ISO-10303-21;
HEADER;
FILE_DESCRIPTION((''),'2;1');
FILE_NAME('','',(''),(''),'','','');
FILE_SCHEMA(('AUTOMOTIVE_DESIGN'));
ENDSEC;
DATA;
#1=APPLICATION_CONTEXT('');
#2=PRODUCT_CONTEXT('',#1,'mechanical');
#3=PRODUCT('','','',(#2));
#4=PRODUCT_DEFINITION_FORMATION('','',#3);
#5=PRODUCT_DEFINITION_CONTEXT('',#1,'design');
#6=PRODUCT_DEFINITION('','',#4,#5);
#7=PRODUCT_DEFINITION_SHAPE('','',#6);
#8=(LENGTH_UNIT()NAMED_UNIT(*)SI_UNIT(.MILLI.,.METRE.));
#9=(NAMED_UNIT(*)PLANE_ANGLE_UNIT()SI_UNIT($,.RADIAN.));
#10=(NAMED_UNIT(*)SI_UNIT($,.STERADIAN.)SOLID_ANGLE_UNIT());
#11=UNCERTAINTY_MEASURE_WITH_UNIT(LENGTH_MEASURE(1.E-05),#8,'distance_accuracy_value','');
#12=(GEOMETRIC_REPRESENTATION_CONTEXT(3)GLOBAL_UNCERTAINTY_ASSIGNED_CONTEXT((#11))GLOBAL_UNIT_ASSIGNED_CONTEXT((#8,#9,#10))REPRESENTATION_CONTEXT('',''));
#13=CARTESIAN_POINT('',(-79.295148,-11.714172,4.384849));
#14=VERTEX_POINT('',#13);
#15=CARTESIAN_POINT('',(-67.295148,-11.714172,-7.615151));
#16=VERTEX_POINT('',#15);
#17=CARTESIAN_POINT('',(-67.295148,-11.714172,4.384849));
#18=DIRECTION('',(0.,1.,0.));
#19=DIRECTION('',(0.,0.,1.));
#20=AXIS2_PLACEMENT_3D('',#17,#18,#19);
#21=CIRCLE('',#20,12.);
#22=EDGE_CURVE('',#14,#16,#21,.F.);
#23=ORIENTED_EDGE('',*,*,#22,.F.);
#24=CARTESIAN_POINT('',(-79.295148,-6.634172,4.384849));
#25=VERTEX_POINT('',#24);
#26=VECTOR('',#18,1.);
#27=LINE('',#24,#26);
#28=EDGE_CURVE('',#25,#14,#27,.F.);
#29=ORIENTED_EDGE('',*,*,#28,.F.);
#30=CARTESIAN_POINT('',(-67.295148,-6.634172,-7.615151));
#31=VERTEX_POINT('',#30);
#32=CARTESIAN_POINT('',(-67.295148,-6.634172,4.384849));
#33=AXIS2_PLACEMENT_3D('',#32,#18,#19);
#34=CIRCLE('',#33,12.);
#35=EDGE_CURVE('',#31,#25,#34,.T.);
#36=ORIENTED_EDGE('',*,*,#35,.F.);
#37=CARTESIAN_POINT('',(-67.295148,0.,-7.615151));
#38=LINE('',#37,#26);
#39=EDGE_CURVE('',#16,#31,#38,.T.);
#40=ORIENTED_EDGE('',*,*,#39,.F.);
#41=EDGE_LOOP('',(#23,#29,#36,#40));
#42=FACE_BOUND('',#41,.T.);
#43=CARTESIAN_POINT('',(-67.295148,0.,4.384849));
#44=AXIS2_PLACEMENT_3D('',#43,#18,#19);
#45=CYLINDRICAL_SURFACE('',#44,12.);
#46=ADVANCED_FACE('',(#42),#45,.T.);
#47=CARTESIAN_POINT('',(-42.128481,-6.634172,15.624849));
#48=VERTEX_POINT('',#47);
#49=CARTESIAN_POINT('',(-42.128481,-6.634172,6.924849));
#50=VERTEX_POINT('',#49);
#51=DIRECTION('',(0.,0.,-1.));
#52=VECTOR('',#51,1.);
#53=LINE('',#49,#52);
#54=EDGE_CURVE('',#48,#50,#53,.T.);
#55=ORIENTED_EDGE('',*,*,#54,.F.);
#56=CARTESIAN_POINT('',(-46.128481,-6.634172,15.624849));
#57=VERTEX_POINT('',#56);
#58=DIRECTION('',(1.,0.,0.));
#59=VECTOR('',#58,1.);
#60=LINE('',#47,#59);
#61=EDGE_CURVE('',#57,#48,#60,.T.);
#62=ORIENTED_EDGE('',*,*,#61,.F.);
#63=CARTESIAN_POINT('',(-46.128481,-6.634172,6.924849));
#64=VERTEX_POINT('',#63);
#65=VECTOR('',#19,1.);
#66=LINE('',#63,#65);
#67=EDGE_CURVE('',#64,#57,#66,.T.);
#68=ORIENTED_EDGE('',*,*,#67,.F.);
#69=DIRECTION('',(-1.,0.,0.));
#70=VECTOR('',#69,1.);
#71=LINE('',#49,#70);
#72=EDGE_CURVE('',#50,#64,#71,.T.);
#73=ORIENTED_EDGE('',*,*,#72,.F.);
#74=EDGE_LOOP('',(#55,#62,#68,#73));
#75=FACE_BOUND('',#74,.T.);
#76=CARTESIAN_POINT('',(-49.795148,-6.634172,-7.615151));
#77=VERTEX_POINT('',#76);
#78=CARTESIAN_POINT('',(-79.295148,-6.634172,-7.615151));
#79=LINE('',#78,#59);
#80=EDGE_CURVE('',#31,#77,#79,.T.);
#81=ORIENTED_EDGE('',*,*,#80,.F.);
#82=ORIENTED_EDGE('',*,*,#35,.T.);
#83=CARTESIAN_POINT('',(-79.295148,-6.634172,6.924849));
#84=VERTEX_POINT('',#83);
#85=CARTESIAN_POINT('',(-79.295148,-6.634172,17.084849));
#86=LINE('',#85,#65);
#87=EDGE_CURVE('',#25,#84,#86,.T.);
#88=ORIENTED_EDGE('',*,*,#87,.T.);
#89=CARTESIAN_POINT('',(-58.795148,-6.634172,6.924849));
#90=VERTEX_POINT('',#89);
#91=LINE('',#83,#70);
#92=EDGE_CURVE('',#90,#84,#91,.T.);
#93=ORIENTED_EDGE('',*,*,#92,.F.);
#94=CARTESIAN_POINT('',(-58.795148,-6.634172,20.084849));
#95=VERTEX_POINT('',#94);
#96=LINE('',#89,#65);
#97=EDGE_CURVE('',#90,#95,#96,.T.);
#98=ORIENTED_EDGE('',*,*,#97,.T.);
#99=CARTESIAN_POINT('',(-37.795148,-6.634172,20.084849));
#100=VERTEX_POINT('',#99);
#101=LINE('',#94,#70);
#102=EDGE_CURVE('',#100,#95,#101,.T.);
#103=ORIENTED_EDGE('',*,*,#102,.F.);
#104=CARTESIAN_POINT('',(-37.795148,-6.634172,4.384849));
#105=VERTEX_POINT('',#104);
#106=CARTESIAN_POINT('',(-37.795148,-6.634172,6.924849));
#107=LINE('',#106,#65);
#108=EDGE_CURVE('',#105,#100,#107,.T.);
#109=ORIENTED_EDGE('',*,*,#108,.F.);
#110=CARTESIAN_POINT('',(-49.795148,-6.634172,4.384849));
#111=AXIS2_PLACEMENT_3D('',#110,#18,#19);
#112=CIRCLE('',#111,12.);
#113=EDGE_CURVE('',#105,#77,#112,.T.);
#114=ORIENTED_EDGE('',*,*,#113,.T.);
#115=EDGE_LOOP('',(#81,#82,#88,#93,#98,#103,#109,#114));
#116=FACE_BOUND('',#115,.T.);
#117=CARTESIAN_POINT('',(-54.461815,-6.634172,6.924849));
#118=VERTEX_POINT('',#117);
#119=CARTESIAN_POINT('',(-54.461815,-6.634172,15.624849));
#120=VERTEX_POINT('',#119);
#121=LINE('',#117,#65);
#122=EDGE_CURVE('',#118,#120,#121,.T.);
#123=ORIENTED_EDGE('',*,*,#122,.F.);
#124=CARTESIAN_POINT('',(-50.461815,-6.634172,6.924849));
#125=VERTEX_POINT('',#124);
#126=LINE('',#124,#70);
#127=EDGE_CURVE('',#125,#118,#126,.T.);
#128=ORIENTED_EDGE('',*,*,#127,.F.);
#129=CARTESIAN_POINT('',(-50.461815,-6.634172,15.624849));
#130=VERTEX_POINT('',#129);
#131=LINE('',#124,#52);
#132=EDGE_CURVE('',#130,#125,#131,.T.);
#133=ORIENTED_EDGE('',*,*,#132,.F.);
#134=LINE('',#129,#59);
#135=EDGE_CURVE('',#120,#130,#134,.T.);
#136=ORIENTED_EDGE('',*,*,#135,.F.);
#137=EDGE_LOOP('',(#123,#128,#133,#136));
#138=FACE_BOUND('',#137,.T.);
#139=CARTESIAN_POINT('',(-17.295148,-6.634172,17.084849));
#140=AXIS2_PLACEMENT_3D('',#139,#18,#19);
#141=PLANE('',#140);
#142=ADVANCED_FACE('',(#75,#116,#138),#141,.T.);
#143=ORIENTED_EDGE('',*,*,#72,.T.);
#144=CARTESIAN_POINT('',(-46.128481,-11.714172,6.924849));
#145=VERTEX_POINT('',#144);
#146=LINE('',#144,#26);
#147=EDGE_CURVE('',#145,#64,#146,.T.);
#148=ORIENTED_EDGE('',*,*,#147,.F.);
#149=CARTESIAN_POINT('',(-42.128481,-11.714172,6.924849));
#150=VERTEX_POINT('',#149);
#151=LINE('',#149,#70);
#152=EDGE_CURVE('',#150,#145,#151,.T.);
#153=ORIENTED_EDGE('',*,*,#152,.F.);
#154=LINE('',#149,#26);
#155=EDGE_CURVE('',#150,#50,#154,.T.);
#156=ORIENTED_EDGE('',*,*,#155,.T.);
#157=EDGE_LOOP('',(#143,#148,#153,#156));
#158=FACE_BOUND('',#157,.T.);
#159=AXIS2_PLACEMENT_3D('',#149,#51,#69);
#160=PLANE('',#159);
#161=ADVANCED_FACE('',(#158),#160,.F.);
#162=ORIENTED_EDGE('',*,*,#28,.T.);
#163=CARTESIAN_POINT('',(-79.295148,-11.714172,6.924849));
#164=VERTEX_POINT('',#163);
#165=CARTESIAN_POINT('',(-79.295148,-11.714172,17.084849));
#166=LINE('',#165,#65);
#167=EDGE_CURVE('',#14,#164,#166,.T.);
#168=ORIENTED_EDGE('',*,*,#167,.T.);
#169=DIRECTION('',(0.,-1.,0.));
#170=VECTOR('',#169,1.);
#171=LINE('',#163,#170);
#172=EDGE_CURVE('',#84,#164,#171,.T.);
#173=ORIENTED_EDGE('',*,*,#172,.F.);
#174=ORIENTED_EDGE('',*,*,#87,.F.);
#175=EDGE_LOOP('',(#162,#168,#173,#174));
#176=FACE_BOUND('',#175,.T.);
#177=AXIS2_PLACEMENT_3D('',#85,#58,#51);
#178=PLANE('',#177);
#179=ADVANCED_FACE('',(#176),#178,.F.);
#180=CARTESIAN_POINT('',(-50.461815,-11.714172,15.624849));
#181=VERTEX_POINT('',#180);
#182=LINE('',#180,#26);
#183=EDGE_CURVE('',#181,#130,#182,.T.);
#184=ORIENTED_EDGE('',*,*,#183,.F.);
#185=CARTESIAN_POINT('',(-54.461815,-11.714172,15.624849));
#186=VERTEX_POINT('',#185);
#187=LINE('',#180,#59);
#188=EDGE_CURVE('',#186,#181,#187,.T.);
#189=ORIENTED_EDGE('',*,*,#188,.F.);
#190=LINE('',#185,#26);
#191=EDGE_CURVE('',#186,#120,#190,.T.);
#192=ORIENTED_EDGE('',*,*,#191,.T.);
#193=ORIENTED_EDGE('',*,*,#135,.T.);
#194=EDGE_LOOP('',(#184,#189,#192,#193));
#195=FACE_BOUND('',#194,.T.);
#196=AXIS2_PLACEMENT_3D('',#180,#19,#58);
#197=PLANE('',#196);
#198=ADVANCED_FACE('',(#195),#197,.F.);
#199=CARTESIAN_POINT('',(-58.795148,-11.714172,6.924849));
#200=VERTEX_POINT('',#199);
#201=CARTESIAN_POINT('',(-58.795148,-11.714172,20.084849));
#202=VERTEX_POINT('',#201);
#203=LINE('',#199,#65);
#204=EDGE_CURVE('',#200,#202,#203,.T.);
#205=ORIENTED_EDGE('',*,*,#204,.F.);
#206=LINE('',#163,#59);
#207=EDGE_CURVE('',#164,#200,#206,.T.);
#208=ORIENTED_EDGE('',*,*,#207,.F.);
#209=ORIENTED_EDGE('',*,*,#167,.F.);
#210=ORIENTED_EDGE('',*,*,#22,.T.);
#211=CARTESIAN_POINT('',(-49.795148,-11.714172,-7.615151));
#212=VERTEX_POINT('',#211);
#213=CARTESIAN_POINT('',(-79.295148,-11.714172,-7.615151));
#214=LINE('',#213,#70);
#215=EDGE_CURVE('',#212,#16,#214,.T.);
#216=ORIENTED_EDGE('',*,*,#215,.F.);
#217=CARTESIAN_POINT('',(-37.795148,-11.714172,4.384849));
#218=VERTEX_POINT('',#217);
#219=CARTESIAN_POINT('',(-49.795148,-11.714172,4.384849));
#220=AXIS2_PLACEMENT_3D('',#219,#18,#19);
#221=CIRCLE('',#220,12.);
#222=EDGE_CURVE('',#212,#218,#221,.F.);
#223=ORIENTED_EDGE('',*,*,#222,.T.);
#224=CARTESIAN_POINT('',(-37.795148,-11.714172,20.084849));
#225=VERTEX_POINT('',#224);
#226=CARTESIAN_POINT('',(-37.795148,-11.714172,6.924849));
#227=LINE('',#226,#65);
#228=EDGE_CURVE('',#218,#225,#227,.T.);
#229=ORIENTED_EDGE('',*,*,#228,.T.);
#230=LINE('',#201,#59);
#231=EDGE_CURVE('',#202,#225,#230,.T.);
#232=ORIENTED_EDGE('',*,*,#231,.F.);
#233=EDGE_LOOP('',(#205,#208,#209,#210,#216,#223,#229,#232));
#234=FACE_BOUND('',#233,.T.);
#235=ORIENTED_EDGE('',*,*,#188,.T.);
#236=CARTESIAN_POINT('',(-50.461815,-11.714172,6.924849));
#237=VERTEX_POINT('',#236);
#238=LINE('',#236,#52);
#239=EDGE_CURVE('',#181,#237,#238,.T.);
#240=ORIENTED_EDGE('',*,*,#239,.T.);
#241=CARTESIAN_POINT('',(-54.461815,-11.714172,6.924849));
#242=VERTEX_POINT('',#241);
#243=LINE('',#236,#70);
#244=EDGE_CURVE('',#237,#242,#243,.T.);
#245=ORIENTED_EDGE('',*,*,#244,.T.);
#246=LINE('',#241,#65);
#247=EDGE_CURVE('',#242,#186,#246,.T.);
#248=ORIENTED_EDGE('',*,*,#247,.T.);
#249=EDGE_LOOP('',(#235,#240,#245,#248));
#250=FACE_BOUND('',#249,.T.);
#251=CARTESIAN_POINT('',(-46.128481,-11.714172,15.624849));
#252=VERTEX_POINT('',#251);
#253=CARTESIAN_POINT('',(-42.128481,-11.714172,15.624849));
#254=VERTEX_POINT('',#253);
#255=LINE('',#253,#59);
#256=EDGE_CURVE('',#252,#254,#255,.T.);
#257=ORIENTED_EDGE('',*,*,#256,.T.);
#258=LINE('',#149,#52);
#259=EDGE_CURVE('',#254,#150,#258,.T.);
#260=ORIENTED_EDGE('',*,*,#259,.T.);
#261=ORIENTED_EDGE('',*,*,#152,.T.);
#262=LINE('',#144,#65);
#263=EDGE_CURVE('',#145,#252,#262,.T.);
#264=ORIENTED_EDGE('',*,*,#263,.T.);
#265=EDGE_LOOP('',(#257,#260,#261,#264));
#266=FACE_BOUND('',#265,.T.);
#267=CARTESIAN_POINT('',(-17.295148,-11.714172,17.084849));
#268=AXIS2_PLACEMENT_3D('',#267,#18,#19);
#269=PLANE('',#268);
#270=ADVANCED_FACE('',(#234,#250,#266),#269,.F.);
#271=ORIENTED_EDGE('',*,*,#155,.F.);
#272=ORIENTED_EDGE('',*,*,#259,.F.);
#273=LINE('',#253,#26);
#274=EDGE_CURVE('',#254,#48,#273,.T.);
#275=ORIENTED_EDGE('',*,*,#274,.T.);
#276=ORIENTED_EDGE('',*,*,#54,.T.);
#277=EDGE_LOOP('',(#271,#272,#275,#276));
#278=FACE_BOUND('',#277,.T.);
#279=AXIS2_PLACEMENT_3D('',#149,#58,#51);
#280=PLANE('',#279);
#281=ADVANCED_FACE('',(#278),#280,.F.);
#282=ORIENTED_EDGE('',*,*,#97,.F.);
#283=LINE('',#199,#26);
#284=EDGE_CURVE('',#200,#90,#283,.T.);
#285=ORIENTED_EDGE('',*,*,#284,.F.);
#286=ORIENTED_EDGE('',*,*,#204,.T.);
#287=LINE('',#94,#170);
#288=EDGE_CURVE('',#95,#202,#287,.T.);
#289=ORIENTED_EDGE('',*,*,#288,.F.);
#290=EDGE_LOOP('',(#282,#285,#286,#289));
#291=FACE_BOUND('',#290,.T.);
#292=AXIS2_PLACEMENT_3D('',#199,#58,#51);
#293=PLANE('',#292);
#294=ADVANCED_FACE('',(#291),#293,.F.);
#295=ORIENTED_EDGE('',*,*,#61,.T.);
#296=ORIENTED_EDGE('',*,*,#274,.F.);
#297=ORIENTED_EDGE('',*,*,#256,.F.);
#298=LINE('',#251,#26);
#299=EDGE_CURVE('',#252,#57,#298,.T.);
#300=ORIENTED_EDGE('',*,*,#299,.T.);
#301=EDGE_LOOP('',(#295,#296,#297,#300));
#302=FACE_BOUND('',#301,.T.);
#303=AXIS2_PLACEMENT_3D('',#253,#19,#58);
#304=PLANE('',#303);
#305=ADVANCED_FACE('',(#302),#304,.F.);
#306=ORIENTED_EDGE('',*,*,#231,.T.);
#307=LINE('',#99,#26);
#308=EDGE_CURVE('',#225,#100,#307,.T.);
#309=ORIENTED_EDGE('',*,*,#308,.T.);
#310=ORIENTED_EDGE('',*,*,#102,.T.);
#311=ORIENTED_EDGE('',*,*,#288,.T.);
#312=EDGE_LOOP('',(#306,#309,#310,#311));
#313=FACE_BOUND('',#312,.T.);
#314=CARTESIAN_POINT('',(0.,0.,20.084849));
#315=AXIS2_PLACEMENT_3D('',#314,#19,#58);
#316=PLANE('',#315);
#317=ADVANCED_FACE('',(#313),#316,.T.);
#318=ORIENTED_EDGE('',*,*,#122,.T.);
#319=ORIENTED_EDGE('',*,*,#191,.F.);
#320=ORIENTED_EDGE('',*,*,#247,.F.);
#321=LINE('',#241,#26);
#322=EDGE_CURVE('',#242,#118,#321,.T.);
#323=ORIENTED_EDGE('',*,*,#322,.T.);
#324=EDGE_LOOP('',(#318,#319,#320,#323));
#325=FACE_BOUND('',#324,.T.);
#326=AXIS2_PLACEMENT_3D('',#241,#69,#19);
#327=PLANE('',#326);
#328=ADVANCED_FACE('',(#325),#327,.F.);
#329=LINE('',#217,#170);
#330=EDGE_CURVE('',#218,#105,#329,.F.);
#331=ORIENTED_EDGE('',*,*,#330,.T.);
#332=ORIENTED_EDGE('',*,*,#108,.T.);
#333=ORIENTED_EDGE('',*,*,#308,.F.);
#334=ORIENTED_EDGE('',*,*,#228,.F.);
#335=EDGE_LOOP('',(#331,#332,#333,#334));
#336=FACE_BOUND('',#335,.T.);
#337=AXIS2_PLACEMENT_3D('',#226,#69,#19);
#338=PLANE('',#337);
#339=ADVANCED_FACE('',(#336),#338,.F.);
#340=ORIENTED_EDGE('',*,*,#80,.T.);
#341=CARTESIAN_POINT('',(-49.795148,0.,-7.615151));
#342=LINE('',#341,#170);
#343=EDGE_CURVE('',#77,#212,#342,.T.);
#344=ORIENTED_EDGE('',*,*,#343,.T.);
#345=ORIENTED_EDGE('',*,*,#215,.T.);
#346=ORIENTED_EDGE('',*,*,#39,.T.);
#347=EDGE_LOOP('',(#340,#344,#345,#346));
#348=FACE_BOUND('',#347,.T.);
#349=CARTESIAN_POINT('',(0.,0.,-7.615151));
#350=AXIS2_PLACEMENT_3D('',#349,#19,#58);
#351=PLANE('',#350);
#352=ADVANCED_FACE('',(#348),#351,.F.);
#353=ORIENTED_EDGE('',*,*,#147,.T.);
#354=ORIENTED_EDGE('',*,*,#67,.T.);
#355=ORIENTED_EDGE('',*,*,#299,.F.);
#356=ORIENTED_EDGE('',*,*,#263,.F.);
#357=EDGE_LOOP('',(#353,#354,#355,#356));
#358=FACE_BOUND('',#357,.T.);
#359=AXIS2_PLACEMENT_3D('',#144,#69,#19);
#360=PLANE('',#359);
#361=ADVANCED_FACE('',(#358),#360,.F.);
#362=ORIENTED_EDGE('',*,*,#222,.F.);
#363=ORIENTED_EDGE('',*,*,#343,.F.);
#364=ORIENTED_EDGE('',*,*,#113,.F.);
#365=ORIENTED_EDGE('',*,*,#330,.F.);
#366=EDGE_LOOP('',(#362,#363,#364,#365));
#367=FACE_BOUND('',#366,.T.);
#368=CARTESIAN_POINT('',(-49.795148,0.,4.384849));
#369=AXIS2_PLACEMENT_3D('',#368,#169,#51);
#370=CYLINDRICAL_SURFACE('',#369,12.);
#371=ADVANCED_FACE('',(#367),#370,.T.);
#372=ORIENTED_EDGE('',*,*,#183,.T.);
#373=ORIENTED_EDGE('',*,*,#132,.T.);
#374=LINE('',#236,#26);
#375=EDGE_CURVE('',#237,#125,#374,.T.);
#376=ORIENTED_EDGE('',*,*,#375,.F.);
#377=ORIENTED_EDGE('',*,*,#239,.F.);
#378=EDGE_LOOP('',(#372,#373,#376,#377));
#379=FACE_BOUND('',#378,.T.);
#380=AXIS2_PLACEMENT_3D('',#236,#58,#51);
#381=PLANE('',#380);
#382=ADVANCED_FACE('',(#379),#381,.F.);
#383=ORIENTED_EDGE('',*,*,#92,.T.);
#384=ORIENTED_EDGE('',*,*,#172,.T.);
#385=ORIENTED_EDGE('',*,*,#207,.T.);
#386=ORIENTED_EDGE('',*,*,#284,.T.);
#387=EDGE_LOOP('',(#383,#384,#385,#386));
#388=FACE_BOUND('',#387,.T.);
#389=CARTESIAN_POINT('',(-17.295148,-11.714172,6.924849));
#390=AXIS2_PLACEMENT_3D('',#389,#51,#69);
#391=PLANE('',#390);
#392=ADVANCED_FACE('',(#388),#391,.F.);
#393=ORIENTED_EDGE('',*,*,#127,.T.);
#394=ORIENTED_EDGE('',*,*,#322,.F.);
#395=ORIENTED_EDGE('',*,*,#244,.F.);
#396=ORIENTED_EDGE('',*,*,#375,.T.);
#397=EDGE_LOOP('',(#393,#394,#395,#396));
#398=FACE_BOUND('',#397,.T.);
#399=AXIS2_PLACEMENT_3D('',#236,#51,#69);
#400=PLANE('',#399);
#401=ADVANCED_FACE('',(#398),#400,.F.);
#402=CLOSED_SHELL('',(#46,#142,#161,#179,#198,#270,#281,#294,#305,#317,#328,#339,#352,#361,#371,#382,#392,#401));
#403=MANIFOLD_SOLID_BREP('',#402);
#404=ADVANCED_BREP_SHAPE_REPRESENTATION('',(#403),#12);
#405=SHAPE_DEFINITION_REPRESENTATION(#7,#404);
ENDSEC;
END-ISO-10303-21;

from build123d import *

# Parameters (mm, degrees)
SIDEBUMPERS_START       = -58.795147929
SIDEBUMPERS_OUTLINE_W   = 5.08
SIDEBUMPERS_OUTLINE_H   = 12.7
SIDEBUMPERS_DEPTH       = 21
SIDEBUMPERS_START_2     = -79.295147929
SIDEBUMPERS_2_OUTLINE_W = 5.08
SIDEBUMPERS_2_OUTLINE_H = 2.54
SIDEBUMPERS_2_DEPTH     = 62
SKETCH3_W               = 20.5
SKETCH3_H               = 5.08
CUT_EXTRUDE1_DEPTH      = 5.08
SKETCH5_W               = 21
SKETCH5_H               = 5.08
BOSS_EXTRUDE1_DEPTH     = 3
SKETCH8_W               = 41.5
SKETCH8_H               = 5.08
BOSS_EXTRUDE3_DEPTH     = 12
FILLET2_R               = 12
SKETCH9_W               = 4
SKETCH9_H               = 8.7
CUT_EXTRUDE5_DEPTH      = 5.08


# Read off the part's stored shape, not the designer's step: SideBumpers
with BuildPart() as part:
    # SideBumpers outline → SideBumpers (new body)
    with BuildSketch(Plane.YZ.offset(SIDEBUMPERS_START)):
        with Locations((-9.174171779, 10.734849265)):
            Rectangle(SIDEBUMPERS_OUTLINE_W, SIDEBUMPERS_OUTLINE_H)
    extrude(amount=SIDEBUMPERS_DEPTH)

    # SideBumpers 2 outline → SideBumpers 2 (add)
    with BuildSketch(Plane.YZ.offset(SIDEBUMPERS_START_2)):
        with Locations((-9.174171779, 5.654849265)):
            Rectangle(SIDEBUMPERS_2_OUTLINE_W, SIDEBUMPERS_2_OUTLINE_H)
    extrude(amount=SIDEBUMPERS_2_DEPTH)

    # Sketch3 → Cut-Extrude1 (cut)
    with BuildSketch(Plane(origin=(0, 0, 4.384849265), x_dir=(-1, 0, 0), z_dir=(0, 0, -1))):
        with Locations((27.545147929, -9.174171779)):
            Rectangle(SKETCH3_W, SKETCH3_H)
    extrude(amount=-CUT_EXTRUDE1_DEPTH, mode=Mode.SUBTRACT)

    # Sketch5 → Boss-Extrude1 (add)
    with BuildSketch(Plane.XY.offset(17.084849265)):
        with Locations((-48.295147929, -9.174171779)):
            Rectangle(SKETCH5_W, SKETCH5_H)
    extrude(amount=BOSS_EXTRUDE1_DEPTH)

    # Sketch8 → Boss-Extrude3 (add)
    with BuildSketch(Plane(origin=(0, 0, 4.384849265), x_dir=(-1, 0, 0), z_dir=(0, 0, -1))):
        with Locations((58.545147929, -9.174171779)):
            Rectangle(SKETCH8_W, SKETCH8_H)
    extrude(amount=BOSS_EXTRUDE3_DEPTH)

    # Fillet2
    fillet2_edges = [part.edges().sort_by_distance(p)[0] for p in [
        (-79.295147929, -9.174171779, -7.615150735),
        (-37.795147929, -9.174171779, -7.615150735),
    ]]
    fillet(fillet2_edges, radius=FILLET2_R)

    # Sketch9 → Cut-Extrude5 (cut)
    with BuildSketch(Plane(origin=(0, -6.634171779, 0), x_dir=(1, 0, 0), z_dir=(0, 1, 0))):
        with Locations((-44.128481262, -11.274849265)):
            Rectangle(SKETCH9_W, SKETCH9_H)
        with Locations((-52.461814595, -11.274849265)):
            Rectangle(SKETCH9_W, SKETCH9_H)
    extrude(amount=-CUT_EXTRUDE5_DEPTH, mode=Mode.SUBTRACT)


solid = part.part
